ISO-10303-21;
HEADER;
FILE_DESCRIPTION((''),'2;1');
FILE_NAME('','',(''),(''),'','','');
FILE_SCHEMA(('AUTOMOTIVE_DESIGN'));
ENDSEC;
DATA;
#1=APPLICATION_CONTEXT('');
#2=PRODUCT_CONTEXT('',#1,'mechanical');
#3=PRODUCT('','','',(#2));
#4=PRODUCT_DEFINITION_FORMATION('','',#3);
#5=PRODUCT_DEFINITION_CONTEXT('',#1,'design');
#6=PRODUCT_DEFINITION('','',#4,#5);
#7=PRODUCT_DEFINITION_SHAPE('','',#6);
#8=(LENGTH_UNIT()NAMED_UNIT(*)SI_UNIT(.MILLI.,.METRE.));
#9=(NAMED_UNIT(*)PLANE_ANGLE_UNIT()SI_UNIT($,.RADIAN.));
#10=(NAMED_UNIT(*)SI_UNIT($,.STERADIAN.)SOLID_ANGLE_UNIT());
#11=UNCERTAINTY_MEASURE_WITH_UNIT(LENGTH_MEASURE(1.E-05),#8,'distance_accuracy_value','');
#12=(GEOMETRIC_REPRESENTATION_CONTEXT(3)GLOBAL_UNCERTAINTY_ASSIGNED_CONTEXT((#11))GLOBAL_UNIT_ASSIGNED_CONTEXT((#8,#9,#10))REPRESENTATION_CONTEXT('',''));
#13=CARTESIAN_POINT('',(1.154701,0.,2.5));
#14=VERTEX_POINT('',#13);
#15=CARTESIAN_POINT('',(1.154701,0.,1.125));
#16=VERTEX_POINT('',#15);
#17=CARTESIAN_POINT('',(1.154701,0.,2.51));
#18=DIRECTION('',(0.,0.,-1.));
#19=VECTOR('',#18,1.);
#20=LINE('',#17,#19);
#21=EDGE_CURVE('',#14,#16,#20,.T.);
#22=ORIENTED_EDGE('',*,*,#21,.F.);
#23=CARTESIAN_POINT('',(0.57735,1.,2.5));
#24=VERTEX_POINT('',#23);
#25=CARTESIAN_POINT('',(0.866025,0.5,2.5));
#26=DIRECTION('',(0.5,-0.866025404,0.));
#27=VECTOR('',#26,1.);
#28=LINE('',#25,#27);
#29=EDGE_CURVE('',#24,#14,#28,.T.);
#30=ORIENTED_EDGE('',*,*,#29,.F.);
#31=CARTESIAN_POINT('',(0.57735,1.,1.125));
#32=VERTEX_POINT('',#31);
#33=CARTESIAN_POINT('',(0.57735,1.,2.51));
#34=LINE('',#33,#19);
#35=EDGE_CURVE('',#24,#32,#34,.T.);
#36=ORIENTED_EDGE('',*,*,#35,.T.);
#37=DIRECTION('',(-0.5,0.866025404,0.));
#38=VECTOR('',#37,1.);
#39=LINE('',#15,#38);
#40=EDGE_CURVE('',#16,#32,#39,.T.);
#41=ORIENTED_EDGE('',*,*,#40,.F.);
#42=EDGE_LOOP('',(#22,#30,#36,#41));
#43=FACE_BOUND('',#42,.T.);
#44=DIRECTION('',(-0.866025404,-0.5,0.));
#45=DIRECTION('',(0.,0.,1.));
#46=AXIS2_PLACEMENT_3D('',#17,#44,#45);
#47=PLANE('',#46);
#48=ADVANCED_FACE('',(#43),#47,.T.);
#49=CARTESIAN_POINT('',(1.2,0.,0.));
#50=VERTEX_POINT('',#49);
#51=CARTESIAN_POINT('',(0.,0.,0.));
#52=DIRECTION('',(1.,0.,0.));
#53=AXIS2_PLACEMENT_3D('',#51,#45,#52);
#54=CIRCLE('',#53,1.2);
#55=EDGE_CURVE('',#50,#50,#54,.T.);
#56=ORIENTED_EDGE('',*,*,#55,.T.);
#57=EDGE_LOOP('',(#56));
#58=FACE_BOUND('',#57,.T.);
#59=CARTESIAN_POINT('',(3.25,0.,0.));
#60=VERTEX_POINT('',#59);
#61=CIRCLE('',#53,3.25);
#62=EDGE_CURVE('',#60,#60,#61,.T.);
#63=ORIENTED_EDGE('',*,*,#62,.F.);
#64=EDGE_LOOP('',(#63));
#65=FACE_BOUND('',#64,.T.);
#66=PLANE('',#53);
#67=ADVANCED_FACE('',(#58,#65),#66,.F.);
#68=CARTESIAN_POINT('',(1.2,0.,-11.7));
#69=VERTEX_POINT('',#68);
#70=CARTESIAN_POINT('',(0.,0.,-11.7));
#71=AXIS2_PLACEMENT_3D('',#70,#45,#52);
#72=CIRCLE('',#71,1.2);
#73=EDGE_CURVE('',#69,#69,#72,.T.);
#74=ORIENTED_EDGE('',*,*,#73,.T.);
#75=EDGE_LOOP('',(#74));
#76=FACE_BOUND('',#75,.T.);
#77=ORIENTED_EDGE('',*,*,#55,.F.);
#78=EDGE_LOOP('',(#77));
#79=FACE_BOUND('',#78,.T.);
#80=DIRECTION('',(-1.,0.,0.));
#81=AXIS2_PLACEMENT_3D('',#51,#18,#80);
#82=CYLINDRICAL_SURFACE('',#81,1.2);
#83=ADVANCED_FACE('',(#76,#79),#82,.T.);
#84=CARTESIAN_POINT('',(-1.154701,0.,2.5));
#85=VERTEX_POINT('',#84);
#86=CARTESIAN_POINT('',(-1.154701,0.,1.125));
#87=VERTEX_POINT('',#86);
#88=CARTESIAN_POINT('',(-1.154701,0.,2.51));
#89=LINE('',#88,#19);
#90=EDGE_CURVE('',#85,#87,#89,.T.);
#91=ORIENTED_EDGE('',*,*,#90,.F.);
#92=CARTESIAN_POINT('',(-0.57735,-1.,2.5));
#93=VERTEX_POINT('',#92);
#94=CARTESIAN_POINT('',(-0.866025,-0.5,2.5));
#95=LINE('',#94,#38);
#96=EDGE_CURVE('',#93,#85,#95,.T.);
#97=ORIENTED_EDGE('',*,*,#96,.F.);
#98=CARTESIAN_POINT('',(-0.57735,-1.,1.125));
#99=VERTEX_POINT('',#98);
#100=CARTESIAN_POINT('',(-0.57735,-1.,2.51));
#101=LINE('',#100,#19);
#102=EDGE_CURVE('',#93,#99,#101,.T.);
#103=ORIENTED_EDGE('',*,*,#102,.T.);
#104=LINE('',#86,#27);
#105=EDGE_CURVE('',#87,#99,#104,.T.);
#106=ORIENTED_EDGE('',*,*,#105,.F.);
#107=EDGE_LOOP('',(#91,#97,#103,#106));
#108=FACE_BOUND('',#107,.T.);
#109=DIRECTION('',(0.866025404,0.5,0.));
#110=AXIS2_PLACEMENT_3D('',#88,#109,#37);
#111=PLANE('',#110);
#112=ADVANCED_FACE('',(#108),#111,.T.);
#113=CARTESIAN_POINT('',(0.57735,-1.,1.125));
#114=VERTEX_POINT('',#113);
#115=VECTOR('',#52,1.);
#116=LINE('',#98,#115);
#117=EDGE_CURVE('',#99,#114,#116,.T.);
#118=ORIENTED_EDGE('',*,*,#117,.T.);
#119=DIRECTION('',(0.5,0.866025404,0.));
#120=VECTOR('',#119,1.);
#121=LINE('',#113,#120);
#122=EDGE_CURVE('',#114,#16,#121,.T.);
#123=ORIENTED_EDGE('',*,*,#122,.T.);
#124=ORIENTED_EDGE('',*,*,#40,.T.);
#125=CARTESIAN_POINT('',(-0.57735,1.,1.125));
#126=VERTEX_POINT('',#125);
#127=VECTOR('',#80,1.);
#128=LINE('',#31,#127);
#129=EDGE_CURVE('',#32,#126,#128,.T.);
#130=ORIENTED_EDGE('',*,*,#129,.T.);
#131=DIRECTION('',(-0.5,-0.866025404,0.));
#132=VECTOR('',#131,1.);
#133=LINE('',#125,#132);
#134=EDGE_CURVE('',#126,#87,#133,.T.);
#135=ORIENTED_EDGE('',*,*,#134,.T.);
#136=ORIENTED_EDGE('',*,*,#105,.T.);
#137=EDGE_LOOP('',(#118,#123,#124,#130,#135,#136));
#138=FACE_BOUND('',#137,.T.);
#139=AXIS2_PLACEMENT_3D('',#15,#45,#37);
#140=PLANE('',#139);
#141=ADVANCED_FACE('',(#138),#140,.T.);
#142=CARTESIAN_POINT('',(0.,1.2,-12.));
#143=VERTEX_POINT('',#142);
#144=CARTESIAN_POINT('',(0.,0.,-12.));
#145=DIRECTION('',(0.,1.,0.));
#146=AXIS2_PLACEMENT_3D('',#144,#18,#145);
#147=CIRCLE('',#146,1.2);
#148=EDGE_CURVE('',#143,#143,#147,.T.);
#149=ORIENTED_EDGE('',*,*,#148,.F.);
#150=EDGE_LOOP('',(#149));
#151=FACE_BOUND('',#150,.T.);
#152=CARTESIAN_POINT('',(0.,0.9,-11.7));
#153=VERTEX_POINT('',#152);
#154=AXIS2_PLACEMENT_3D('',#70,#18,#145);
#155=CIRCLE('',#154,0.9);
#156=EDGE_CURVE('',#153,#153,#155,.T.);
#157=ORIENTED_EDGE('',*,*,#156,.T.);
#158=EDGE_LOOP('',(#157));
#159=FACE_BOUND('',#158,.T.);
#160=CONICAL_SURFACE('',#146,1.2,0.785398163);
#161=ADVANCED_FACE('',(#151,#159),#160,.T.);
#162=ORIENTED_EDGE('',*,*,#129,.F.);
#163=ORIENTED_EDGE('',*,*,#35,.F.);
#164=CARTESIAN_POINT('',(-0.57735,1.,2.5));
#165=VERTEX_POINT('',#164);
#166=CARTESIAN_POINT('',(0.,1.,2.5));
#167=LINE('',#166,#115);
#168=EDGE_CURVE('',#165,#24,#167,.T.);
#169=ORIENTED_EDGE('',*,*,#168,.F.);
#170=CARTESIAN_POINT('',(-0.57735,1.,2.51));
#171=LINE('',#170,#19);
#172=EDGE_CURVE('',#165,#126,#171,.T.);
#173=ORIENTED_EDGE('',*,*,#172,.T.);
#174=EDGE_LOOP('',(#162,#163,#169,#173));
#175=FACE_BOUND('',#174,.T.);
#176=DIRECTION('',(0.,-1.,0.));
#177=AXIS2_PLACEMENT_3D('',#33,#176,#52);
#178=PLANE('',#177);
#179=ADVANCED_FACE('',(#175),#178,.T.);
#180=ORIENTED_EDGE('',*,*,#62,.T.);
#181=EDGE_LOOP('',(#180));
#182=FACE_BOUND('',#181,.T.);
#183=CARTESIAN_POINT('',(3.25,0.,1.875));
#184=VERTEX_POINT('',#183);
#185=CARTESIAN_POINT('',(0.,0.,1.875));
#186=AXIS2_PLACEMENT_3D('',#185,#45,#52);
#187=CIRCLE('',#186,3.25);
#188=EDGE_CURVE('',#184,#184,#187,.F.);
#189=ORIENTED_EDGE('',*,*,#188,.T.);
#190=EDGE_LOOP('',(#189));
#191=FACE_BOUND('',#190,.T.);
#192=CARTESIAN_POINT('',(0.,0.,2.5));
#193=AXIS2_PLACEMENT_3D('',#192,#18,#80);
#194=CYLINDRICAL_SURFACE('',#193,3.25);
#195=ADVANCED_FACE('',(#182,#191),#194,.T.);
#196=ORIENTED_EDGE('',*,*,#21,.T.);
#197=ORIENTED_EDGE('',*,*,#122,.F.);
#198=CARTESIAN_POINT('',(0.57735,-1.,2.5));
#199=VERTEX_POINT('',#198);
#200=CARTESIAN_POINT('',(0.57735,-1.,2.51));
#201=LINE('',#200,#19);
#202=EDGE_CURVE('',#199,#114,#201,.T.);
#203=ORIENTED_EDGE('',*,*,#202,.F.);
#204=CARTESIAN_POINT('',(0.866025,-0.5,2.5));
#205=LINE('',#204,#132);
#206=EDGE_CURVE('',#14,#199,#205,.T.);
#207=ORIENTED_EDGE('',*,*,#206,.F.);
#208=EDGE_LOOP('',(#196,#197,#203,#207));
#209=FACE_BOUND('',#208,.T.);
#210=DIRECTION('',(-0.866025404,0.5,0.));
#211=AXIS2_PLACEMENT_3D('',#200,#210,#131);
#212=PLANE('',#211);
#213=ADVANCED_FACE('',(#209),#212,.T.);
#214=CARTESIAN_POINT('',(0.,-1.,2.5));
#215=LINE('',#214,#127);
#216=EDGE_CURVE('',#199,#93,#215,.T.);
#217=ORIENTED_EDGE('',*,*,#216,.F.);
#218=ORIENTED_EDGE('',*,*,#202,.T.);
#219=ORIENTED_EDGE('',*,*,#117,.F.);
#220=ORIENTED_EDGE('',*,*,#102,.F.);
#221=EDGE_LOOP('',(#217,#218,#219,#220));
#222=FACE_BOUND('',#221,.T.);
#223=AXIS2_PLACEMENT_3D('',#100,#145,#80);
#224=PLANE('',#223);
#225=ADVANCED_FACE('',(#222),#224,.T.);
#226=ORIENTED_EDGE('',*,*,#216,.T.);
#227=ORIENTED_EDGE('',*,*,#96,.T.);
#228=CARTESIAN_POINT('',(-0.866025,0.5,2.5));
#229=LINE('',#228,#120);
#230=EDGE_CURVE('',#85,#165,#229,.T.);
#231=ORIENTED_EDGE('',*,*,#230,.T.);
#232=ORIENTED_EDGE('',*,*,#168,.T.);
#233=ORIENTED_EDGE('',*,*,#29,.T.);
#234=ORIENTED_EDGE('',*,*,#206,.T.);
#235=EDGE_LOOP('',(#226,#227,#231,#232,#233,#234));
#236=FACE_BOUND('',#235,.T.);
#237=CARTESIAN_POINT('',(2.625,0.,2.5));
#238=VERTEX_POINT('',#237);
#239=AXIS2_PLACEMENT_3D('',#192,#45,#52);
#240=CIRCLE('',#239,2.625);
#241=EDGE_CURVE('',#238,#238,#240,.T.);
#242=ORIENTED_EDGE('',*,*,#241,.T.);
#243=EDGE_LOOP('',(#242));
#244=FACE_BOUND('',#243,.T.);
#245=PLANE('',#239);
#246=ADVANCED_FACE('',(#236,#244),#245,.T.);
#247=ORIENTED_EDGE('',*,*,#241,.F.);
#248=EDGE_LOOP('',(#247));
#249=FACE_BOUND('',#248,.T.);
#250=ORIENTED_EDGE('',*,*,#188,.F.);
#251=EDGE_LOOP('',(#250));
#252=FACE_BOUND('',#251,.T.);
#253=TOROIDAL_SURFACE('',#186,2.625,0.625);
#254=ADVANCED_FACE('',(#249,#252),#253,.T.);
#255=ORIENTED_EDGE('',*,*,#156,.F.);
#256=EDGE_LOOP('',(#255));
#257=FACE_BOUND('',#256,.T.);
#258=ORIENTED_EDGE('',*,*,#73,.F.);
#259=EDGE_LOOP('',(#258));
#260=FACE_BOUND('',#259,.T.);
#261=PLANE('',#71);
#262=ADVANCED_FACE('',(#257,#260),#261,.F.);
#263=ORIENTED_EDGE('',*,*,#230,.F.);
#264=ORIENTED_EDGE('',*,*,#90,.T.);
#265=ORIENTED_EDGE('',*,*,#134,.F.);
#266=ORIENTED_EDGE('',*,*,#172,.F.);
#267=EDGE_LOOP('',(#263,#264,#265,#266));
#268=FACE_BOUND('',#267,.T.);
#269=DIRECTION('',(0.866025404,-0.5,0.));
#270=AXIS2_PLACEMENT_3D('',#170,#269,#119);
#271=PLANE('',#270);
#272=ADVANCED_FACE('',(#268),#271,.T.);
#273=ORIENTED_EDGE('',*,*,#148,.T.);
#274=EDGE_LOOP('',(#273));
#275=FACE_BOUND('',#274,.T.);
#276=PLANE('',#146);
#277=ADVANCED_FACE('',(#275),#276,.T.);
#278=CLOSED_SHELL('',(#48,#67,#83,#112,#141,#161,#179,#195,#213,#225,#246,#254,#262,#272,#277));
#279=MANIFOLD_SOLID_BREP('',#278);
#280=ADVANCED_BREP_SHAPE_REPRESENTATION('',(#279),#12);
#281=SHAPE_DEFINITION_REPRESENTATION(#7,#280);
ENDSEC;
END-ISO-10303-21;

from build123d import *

# Parameters (mm, degrees)
F_0030_CYLINDER_SKETCH_R    = 3.25
F_0030_CYLINDER_DEPTH       = 2.5
F_0031_FILLET_R             = 0.625
F_0032_EXTRUDE_DEPTH        = 1.385
F_0032_EXTRUDE_ROTATE_ANGLE = 120
F_0035_CYLINDER_SKETCH_R    = 1.2
F_0035_CYLINDER_DEPTH       = 11.7
F_0036_CONE_ROTATE_ANGLE    = 90


with BuildPart() as part:
    # 0030_cylinder_Sketch → 0030_cylinder (new body)
    with BuildSketch(Plane.XY):
        Circle(F_0030_CYLINDER_SKETCH_R)
    extrude(amount=F_0030_CYLINDER_DEPTH)

    # 0031_fillet
    f_0031_fillet_edges = [part.edges().sort_by_distance(p)[0] for p in [
        (-3.25, 0, 2.5),
    ]]
    fillet(f_0031_fillet_edges, radius=F_0031_FILLET_R)


with BuildPart() as body_2:
    # 0032_extrude_Sketch → 0032_extrude (new body)
    with BuildSketch(Plane.XY):
        Polygon((0, 0), (1.154700538, 0), (1.732050808, 1), (1.154700538, 2), (0, 2), (-0.577350269, 1), align=None)
    extrude(amount=F_0032_EXTRUDE_DEPTH)


with BuildPart() as body_2_1:
    # 0032_extrude_Rotate: read off the stored shape, not the designer's step
    # 0032_extrude_Rotate: moved
    add(body_2.part.rotate(Axis((0, 0, 0), (0, 0, 1)), F_0032_EXTRUDE_ROTATE_ANGLE))


with BuildPart() as body_2_2:
    # 0032_extrude_Translate: moved
    add(body_2_1.part.moved(Location((1.154700538, 0, 1.125))))


with BuildPart() as part_1:
    add(part.part)

    # 0034_sub: cut body 2
    add(body_2_2.part, mode=Mode.SUBTRACT)


with BuildPart() as body_2_2_1:
    # 0035_cylinder_Sketch → 0035_cylinder (new body)
    with BuildSketch(Plane.XY):
        Circle(F_0035_CYLINDER_SKETCH_R)
    extrude(amount=F_0035_CYLINDER_DEPTH)


with BuildPart() as body_2_2_2:
    # 0035_cylinder_Translate: moved
    add(body_2_2_1.part.moved(Location((0, 0, -11.7))))


with BuildPart() as body_3:
    # 0036_cone_Sketch → 0036_cone (revolve)
    with BuildSketch(Plane.XY, mode=Mode.PRIVATE) as f_0036_cone_sk:
        Polygon((0, 0), (1.2, 0), (0.9, 0.3), (0, 0.3), align=None)
    revolve(f_0036_cone_sk.sketch.rotate(Axis((0, -100, 0), (0, 1, 0)), 90), axis=Axis((0, -100, 0), (0, 1, 0)))


with BuildPart() as body_3_1:
    # 0036_cone_Rotate: moved
    add(body_3.part.rotate(Axis((0, 0, 0), (1, 0, 0)), F_0036_CONE_ROTATE_ANGLE))


with BuildPart() as body_3_2:
    # 0036_cone_Translate: moved
    add(body_3_1.part.moved(Location((0, 0, -12))))


with BuildPart() as body_2_2_3:
    add(body_2_2_2.part)

    # 0038_add: union body 3
    add(body_3_2.part)


with BuildPart() as part_2:
    add(part_1.part)

    # 0039_add: union body 2 2
    add(body_2_2_3.part)


solid = part_2.part
